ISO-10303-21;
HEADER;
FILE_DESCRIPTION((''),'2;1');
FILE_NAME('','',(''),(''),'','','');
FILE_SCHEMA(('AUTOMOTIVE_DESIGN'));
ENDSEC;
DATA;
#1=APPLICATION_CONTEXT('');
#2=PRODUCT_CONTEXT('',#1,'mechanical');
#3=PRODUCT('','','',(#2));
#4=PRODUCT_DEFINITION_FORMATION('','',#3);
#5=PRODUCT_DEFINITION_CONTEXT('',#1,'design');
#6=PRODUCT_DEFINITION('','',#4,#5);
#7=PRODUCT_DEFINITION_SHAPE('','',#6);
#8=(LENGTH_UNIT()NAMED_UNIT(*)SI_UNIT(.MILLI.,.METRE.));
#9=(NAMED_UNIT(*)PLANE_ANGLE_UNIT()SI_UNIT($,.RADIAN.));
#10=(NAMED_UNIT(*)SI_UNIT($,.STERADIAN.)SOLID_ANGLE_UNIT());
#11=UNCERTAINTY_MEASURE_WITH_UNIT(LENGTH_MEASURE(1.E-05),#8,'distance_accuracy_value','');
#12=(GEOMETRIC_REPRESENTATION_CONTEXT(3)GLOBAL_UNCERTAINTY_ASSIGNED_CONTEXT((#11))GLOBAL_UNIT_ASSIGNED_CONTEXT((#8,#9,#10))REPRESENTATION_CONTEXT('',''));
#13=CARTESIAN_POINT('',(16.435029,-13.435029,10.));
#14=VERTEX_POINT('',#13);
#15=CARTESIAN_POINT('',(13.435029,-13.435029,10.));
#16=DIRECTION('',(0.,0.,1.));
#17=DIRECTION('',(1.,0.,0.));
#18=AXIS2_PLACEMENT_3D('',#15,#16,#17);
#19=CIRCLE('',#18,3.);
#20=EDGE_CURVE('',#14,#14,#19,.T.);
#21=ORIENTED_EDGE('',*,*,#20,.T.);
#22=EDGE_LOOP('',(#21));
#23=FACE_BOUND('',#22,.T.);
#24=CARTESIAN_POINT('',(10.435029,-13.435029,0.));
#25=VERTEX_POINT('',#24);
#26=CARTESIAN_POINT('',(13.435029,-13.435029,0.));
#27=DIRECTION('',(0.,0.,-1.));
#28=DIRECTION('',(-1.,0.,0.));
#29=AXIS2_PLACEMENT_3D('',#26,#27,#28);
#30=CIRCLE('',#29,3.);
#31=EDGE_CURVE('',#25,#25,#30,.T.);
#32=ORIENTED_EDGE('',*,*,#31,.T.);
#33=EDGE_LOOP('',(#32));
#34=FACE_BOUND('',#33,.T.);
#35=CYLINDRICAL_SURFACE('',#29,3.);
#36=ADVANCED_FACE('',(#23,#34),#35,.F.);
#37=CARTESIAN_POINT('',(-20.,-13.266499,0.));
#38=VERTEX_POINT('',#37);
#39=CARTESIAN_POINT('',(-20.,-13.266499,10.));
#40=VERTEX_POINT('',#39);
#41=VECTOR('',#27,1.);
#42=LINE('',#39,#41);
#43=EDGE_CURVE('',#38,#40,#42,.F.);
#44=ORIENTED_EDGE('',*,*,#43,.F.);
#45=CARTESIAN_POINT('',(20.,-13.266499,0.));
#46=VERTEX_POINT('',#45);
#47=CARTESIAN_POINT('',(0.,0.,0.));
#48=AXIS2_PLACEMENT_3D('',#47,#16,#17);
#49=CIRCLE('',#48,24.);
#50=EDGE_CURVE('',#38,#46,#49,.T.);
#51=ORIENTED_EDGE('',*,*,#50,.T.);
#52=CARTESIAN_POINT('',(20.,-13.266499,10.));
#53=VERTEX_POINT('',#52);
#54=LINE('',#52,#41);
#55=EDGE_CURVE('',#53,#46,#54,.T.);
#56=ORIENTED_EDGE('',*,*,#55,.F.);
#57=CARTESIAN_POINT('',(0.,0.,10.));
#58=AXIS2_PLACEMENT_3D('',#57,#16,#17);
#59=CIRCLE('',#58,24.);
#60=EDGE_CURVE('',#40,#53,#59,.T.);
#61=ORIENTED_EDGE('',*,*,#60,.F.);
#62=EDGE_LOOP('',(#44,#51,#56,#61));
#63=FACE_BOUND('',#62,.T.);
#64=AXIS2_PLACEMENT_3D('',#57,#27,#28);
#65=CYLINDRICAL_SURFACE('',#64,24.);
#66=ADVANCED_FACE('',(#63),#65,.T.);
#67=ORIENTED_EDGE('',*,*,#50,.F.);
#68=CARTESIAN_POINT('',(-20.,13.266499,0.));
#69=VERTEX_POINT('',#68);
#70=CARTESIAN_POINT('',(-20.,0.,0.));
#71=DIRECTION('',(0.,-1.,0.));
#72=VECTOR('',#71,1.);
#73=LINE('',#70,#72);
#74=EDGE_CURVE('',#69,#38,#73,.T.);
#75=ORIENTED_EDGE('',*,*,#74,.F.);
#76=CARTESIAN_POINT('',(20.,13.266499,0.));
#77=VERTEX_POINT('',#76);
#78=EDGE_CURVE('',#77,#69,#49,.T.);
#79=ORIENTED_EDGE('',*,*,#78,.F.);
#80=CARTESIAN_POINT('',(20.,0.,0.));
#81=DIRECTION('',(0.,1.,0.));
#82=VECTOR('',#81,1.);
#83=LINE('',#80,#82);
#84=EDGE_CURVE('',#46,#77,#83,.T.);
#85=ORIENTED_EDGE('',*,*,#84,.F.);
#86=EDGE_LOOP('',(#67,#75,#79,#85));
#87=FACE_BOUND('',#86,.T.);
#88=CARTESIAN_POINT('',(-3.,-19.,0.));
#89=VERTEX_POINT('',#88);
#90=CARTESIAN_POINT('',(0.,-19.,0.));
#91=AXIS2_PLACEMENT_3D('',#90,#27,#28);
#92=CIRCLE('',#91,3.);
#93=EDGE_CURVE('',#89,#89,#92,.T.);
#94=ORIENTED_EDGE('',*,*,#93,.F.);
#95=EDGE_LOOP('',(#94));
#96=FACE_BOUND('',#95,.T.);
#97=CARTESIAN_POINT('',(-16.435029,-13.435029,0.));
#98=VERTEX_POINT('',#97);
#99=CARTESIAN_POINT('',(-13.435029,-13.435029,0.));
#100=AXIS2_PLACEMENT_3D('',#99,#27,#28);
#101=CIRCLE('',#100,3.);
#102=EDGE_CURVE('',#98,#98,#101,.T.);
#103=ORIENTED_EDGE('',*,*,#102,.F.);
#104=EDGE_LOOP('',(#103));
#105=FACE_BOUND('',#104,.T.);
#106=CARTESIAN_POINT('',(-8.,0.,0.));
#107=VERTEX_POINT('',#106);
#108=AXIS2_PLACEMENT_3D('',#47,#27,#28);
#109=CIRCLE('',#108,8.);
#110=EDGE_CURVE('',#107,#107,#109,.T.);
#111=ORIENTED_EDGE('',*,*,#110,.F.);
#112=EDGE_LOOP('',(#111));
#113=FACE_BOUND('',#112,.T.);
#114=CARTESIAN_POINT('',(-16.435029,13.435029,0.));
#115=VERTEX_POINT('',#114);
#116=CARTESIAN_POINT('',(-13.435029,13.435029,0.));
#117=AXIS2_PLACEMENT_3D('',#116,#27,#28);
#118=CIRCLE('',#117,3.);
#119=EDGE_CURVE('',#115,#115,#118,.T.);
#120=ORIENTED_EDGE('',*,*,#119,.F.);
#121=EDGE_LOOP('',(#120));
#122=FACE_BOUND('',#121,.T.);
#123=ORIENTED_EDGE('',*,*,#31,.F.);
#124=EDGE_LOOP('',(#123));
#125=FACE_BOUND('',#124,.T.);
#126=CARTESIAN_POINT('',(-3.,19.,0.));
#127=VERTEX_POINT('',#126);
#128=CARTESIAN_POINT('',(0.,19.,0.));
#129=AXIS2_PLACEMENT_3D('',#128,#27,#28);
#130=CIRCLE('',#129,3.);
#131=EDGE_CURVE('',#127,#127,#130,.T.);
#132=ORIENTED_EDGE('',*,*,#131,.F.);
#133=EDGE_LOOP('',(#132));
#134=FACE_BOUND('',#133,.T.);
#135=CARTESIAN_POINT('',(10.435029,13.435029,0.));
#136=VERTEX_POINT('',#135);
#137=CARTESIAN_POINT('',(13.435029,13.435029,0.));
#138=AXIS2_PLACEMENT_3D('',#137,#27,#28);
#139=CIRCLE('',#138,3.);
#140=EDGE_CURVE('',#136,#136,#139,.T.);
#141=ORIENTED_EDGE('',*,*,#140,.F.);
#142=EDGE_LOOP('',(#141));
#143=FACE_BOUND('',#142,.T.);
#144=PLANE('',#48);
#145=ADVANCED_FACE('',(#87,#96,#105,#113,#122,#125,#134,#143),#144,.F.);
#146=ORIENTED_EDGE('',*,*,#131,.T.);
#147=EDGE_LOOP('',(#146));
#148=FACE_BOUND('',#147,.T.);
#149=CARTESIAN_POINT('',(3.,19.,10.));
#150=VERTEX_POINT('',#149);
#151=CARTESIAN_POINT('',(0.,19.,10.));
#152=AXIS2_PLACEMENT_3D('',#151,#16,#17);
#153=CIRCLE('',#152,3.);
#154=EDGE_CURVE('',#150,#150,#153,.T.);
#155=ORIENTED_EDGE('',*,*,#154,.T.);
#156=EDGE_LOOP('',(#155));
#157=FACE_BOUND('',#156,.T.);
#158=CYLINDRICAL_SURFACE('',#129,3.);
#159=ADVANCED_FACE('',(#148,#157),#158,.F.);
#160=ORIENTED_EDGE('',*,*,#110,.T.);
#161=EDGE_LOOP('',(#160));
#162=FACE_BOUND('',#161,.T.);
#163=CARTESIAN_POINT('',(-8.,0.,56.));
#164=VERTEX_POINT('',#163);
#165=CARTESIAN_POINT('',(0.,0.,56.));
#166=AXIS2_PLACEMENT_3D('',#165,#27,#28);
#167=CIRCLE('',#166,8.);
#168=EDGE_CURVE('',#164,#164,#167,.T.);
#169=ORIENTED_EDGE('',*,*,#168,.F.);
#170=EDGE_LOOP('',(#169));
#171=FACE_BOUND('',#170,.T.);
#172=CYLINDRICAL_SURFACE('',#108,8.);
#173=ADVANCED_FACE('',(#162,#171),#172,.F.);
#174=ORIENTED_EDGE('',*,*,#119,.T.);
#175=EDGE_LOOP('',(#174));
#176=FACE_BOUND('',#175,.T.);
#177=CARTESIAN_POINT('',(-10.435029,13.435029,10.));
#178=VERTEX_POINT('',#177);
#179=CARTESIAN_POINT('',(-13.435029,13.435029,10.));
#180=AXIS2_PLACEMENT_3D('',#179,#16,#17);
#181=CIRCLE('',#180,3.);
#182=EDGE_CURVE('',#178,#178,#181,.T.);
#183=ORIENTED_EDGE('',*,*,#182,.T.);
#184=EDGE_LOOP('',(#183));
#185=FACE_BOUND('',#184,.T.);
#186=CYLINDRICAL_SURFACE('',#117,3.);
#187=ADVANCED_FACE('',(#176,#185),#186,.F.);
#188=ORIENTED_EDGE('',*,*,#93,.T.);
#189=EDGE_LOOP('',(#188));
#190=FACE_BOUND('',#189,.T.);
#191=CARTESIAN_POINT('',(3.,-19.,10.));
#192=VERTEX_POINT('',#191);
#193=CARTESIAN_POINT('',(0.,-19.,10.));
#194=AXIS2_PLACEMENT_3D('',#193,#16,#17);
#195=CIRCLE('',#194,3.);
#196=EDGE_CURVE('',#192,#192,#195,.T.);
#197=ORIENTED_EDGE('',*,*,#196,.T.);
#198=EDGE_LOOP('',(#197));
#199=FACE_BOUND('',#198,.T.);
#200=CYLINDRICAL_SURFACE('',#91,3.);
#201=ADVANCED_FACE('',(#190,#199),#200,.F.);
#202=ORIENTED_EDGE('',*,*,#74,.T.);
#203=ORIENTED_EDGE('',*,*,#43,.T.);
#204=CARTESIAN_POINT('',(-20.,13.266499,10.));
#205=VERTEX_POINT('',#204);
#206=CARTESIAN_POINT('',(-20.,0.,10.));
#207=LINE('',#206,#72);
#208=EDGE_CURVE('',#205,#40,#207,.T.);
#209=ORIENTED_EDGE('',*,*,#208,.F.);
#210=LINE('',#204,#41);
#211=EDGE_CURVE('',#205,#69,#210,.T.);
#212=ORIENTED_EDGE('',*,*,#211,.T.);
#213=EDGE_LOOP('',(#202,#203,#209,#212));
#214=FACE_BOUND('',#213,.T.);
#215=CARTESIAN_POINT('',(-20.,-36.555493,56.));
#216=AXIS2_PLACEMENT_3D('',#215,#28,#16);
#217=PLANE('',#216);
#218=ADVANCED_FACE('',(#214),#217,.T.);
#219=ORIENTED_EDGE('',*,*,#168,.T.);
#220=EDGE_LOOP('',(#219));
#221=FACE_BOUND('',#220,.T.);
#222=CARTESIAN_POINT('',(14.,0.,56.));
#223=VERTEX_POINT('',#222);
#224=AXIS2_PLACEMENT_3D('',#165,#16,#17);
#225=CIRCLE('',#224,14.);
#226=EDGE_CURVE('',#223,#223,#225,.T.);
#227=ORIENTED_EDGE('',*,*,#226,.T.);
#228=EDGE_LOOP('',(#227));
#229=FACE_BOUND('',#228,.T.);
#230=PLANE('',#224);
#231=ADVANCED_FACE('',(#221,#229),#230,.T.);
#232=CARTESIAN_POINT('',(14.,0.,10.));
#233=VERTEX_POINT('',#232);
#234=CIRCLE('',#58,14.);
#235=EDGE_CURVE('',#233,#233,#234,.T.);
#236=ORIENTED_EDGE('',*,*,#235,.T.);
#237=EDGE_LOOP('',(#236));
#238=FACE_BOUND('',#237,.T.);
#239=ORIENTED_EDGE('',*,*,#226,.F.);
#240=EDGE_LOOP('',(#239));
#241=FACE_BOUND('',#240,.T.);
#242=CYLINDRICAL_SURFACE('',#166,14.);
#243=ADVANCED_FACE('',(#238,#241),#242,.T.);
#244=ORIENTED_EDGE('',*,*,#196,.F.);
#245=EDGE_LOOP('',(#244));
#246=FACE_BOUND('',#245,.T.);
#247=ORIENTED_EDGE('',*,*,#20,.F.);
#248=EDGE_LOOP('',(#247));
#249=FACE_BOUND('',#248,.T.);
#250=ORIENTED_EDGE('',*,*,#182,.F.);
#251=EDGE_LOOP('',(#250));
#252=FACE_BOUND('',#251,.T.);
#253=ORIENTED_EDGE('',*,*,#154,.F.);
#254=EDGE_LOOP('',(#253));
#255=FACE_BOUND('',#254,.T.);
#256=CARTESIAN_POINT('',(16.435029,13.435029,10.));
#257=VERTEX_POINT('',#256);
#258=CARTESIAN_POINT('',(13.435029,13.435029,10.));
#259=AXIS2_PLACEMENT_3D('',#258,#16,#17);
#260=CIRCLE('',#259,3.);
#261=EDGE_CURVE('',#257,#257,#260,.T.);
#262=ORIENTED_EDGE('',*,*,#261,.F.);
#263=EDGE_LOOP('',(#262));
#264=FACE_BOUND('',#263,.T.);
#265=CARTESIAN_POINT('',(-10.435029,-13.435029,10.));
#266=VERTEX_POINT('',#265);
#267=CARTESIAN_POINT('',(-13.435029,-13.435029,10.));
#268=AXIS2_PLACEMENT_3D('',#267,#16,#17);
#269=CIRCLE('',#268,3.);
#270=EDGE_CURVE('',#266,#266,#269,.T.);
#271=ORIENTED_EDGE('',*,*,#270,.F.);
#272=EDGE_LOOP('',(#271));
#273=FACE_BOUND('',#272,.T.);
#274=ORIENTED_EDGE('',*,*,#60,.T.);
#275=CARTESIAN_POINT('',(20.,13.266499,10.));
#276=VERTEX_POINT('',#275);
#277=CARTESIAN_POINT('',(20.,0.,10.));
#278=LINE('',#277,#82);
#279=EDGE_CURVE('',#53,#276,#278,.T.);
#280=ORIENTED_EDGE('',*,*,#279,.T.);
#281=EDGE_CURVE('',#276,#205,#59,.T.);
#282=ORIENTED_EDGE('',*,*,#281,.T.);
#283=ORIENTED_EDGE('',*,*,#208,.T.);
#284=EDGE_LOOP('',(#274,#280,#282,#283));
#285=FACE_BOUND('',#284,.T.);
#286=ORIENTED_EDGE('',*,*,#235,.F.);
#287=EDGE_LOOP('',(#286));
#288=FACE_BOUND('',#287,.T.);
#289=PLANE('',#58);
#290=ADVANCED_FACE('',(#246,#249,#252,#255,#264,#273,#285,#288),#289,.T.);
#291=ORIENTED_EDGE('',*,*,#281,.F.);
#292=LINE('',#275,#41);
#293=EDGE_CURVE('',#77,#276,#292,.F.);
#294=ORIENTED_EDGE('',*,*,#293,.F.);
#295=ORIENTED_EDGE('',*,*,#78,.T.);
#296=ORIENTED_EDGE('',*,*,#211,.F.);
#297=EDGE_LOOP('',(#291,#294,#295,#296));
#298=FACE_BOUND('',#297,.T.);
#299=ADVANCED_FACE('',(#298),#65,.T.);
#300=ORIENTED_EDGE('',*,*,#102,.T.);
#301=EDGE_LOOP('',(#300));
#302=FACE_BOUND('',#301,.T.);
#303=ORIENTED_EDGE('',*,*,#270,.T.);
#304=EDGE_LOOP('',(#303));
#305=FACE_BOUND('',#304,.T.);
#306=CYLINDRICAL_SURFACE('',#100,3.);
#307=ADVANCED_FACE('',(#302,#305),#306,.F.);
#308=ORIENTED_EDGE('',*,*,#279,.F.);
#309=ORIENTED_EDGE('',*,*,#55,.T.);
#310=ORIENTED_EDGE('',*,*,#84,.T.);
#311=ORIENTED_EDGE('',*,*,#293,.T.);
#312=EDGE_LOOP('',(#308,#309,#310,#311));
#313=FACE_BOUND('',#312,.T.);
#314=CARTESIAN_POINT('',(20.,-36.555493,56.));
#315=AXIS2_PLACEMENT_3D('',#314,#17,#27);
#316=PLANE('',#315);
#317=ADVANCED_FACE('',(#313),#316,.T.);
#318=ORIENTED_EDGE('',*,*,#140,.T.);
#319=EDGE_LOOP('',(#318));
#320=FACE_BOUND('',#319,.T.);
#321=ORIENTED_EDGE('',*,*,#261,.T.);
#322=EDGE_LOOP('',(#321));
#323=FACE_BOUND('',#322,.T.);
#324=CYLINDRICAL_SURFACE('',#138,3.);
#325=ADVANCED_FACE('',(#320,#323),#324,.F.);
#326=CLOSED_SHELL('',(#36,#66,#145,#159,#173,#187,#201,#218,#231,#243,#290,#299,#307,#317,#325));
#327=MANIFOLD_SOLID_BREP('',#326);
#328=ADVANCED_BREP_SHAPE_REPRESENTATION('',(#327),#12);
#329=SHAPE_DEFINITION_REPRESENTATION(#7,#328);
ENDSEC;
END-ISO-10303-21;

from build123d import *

# Parameters (mm, degrees)
SKETCH1_R                  = 24
EXTRUDE1_DEPTH             = 10
SKETCH2_R                  = 14
EXTRUDE2_DEPTH             = 46
EXTRUDE3_START             = -10
EXTRUDE3_DEPTH             = 10
F_6_0_6_DIAMETER_HOLE1_D   = 6
CIRPATTERN1_COUNT          = 8
F_25_0_25_DIAMETER_HOLE1_D = 16


# Read off the part's stored shape, not the designer's step: Extrude3
with BuildPart() as part:
    # Sketch1 → Extrude1 (new body)
    with BuildSketch(Plane.XY):
        Circle(SKETCH1_R)
    extrude(amount=EXTRUDE1_DEPTH)

    # Sketch2 → Extrude2 (add)
    with BuildSketch(Plane.XY.offset(10)):
        Circle(SKETCH2_R)
    extrude(amount=EXTRUDE2_DEPTH)

    # Extrude3 outline → Extrude3 (cut)
    with BuildSketch(Plane(origin=(0, 0, 0), x_dir=(-1, 0, 0), z_dir=(0, 0, -1)).offset(EXTRUDE3_START)):
        with BuildLine():
            Line((-20, -13.266499161), (-20, 13.266499161))
            ThreePointArc((-20, 13.266499161), (-24, 0), (-20, -13.266499161))
        make_face()
        with BuildLine():
            ThreePointArc((20, -13.266499161), (24, 0), (20, 13.266499161))
            Line((20, 13.266499161), (20, -13.266499161))
        make_face()
    extrude(amount=EXTRUDE3_DEPTH, mode=Mode.SUBTRACT)

    # Ø6.0 (6) Diameter Hole1 (through all)
    with Locations(Plane(origin=(0, 0, 0), x_dir=(-1, 0, 0), z_dir=(0, 0, -1))):
        with Locations((0, 19)):
            f_6_0_6_diameter_hole1 = Hole(F_6_0_6_DIAMETER_HOLE1_D / 2)

    # CirPattern1: Ø6.0 (6) Diameter Hole1 ×8 about axis, 2 skipped
    cirpattern1_axis = Axis((0, 0, 0), (0, 0, 1))
    add([f_6_0_6_diameter_hole1.rotate(cirpattern1_axis, i * 360 / CIRPATTERN1_COUNT) for i in range(1, CIRPATTERN1_COUNT) if i not in (2, 6)], mode=Mode.SUBTRACT)

    # Ø25.0 (25) Diameter Hole1 (through all)
    with Locations(Plane(origin=(0, 0, 0), x_dir=(-1, 0, 0), z_dir=(0, 0, -1))):
        with Locations((0, 0)):
            Hole(F_25_0_25_DIAMETER_HOLE1_D / 2)


solid = part.part
